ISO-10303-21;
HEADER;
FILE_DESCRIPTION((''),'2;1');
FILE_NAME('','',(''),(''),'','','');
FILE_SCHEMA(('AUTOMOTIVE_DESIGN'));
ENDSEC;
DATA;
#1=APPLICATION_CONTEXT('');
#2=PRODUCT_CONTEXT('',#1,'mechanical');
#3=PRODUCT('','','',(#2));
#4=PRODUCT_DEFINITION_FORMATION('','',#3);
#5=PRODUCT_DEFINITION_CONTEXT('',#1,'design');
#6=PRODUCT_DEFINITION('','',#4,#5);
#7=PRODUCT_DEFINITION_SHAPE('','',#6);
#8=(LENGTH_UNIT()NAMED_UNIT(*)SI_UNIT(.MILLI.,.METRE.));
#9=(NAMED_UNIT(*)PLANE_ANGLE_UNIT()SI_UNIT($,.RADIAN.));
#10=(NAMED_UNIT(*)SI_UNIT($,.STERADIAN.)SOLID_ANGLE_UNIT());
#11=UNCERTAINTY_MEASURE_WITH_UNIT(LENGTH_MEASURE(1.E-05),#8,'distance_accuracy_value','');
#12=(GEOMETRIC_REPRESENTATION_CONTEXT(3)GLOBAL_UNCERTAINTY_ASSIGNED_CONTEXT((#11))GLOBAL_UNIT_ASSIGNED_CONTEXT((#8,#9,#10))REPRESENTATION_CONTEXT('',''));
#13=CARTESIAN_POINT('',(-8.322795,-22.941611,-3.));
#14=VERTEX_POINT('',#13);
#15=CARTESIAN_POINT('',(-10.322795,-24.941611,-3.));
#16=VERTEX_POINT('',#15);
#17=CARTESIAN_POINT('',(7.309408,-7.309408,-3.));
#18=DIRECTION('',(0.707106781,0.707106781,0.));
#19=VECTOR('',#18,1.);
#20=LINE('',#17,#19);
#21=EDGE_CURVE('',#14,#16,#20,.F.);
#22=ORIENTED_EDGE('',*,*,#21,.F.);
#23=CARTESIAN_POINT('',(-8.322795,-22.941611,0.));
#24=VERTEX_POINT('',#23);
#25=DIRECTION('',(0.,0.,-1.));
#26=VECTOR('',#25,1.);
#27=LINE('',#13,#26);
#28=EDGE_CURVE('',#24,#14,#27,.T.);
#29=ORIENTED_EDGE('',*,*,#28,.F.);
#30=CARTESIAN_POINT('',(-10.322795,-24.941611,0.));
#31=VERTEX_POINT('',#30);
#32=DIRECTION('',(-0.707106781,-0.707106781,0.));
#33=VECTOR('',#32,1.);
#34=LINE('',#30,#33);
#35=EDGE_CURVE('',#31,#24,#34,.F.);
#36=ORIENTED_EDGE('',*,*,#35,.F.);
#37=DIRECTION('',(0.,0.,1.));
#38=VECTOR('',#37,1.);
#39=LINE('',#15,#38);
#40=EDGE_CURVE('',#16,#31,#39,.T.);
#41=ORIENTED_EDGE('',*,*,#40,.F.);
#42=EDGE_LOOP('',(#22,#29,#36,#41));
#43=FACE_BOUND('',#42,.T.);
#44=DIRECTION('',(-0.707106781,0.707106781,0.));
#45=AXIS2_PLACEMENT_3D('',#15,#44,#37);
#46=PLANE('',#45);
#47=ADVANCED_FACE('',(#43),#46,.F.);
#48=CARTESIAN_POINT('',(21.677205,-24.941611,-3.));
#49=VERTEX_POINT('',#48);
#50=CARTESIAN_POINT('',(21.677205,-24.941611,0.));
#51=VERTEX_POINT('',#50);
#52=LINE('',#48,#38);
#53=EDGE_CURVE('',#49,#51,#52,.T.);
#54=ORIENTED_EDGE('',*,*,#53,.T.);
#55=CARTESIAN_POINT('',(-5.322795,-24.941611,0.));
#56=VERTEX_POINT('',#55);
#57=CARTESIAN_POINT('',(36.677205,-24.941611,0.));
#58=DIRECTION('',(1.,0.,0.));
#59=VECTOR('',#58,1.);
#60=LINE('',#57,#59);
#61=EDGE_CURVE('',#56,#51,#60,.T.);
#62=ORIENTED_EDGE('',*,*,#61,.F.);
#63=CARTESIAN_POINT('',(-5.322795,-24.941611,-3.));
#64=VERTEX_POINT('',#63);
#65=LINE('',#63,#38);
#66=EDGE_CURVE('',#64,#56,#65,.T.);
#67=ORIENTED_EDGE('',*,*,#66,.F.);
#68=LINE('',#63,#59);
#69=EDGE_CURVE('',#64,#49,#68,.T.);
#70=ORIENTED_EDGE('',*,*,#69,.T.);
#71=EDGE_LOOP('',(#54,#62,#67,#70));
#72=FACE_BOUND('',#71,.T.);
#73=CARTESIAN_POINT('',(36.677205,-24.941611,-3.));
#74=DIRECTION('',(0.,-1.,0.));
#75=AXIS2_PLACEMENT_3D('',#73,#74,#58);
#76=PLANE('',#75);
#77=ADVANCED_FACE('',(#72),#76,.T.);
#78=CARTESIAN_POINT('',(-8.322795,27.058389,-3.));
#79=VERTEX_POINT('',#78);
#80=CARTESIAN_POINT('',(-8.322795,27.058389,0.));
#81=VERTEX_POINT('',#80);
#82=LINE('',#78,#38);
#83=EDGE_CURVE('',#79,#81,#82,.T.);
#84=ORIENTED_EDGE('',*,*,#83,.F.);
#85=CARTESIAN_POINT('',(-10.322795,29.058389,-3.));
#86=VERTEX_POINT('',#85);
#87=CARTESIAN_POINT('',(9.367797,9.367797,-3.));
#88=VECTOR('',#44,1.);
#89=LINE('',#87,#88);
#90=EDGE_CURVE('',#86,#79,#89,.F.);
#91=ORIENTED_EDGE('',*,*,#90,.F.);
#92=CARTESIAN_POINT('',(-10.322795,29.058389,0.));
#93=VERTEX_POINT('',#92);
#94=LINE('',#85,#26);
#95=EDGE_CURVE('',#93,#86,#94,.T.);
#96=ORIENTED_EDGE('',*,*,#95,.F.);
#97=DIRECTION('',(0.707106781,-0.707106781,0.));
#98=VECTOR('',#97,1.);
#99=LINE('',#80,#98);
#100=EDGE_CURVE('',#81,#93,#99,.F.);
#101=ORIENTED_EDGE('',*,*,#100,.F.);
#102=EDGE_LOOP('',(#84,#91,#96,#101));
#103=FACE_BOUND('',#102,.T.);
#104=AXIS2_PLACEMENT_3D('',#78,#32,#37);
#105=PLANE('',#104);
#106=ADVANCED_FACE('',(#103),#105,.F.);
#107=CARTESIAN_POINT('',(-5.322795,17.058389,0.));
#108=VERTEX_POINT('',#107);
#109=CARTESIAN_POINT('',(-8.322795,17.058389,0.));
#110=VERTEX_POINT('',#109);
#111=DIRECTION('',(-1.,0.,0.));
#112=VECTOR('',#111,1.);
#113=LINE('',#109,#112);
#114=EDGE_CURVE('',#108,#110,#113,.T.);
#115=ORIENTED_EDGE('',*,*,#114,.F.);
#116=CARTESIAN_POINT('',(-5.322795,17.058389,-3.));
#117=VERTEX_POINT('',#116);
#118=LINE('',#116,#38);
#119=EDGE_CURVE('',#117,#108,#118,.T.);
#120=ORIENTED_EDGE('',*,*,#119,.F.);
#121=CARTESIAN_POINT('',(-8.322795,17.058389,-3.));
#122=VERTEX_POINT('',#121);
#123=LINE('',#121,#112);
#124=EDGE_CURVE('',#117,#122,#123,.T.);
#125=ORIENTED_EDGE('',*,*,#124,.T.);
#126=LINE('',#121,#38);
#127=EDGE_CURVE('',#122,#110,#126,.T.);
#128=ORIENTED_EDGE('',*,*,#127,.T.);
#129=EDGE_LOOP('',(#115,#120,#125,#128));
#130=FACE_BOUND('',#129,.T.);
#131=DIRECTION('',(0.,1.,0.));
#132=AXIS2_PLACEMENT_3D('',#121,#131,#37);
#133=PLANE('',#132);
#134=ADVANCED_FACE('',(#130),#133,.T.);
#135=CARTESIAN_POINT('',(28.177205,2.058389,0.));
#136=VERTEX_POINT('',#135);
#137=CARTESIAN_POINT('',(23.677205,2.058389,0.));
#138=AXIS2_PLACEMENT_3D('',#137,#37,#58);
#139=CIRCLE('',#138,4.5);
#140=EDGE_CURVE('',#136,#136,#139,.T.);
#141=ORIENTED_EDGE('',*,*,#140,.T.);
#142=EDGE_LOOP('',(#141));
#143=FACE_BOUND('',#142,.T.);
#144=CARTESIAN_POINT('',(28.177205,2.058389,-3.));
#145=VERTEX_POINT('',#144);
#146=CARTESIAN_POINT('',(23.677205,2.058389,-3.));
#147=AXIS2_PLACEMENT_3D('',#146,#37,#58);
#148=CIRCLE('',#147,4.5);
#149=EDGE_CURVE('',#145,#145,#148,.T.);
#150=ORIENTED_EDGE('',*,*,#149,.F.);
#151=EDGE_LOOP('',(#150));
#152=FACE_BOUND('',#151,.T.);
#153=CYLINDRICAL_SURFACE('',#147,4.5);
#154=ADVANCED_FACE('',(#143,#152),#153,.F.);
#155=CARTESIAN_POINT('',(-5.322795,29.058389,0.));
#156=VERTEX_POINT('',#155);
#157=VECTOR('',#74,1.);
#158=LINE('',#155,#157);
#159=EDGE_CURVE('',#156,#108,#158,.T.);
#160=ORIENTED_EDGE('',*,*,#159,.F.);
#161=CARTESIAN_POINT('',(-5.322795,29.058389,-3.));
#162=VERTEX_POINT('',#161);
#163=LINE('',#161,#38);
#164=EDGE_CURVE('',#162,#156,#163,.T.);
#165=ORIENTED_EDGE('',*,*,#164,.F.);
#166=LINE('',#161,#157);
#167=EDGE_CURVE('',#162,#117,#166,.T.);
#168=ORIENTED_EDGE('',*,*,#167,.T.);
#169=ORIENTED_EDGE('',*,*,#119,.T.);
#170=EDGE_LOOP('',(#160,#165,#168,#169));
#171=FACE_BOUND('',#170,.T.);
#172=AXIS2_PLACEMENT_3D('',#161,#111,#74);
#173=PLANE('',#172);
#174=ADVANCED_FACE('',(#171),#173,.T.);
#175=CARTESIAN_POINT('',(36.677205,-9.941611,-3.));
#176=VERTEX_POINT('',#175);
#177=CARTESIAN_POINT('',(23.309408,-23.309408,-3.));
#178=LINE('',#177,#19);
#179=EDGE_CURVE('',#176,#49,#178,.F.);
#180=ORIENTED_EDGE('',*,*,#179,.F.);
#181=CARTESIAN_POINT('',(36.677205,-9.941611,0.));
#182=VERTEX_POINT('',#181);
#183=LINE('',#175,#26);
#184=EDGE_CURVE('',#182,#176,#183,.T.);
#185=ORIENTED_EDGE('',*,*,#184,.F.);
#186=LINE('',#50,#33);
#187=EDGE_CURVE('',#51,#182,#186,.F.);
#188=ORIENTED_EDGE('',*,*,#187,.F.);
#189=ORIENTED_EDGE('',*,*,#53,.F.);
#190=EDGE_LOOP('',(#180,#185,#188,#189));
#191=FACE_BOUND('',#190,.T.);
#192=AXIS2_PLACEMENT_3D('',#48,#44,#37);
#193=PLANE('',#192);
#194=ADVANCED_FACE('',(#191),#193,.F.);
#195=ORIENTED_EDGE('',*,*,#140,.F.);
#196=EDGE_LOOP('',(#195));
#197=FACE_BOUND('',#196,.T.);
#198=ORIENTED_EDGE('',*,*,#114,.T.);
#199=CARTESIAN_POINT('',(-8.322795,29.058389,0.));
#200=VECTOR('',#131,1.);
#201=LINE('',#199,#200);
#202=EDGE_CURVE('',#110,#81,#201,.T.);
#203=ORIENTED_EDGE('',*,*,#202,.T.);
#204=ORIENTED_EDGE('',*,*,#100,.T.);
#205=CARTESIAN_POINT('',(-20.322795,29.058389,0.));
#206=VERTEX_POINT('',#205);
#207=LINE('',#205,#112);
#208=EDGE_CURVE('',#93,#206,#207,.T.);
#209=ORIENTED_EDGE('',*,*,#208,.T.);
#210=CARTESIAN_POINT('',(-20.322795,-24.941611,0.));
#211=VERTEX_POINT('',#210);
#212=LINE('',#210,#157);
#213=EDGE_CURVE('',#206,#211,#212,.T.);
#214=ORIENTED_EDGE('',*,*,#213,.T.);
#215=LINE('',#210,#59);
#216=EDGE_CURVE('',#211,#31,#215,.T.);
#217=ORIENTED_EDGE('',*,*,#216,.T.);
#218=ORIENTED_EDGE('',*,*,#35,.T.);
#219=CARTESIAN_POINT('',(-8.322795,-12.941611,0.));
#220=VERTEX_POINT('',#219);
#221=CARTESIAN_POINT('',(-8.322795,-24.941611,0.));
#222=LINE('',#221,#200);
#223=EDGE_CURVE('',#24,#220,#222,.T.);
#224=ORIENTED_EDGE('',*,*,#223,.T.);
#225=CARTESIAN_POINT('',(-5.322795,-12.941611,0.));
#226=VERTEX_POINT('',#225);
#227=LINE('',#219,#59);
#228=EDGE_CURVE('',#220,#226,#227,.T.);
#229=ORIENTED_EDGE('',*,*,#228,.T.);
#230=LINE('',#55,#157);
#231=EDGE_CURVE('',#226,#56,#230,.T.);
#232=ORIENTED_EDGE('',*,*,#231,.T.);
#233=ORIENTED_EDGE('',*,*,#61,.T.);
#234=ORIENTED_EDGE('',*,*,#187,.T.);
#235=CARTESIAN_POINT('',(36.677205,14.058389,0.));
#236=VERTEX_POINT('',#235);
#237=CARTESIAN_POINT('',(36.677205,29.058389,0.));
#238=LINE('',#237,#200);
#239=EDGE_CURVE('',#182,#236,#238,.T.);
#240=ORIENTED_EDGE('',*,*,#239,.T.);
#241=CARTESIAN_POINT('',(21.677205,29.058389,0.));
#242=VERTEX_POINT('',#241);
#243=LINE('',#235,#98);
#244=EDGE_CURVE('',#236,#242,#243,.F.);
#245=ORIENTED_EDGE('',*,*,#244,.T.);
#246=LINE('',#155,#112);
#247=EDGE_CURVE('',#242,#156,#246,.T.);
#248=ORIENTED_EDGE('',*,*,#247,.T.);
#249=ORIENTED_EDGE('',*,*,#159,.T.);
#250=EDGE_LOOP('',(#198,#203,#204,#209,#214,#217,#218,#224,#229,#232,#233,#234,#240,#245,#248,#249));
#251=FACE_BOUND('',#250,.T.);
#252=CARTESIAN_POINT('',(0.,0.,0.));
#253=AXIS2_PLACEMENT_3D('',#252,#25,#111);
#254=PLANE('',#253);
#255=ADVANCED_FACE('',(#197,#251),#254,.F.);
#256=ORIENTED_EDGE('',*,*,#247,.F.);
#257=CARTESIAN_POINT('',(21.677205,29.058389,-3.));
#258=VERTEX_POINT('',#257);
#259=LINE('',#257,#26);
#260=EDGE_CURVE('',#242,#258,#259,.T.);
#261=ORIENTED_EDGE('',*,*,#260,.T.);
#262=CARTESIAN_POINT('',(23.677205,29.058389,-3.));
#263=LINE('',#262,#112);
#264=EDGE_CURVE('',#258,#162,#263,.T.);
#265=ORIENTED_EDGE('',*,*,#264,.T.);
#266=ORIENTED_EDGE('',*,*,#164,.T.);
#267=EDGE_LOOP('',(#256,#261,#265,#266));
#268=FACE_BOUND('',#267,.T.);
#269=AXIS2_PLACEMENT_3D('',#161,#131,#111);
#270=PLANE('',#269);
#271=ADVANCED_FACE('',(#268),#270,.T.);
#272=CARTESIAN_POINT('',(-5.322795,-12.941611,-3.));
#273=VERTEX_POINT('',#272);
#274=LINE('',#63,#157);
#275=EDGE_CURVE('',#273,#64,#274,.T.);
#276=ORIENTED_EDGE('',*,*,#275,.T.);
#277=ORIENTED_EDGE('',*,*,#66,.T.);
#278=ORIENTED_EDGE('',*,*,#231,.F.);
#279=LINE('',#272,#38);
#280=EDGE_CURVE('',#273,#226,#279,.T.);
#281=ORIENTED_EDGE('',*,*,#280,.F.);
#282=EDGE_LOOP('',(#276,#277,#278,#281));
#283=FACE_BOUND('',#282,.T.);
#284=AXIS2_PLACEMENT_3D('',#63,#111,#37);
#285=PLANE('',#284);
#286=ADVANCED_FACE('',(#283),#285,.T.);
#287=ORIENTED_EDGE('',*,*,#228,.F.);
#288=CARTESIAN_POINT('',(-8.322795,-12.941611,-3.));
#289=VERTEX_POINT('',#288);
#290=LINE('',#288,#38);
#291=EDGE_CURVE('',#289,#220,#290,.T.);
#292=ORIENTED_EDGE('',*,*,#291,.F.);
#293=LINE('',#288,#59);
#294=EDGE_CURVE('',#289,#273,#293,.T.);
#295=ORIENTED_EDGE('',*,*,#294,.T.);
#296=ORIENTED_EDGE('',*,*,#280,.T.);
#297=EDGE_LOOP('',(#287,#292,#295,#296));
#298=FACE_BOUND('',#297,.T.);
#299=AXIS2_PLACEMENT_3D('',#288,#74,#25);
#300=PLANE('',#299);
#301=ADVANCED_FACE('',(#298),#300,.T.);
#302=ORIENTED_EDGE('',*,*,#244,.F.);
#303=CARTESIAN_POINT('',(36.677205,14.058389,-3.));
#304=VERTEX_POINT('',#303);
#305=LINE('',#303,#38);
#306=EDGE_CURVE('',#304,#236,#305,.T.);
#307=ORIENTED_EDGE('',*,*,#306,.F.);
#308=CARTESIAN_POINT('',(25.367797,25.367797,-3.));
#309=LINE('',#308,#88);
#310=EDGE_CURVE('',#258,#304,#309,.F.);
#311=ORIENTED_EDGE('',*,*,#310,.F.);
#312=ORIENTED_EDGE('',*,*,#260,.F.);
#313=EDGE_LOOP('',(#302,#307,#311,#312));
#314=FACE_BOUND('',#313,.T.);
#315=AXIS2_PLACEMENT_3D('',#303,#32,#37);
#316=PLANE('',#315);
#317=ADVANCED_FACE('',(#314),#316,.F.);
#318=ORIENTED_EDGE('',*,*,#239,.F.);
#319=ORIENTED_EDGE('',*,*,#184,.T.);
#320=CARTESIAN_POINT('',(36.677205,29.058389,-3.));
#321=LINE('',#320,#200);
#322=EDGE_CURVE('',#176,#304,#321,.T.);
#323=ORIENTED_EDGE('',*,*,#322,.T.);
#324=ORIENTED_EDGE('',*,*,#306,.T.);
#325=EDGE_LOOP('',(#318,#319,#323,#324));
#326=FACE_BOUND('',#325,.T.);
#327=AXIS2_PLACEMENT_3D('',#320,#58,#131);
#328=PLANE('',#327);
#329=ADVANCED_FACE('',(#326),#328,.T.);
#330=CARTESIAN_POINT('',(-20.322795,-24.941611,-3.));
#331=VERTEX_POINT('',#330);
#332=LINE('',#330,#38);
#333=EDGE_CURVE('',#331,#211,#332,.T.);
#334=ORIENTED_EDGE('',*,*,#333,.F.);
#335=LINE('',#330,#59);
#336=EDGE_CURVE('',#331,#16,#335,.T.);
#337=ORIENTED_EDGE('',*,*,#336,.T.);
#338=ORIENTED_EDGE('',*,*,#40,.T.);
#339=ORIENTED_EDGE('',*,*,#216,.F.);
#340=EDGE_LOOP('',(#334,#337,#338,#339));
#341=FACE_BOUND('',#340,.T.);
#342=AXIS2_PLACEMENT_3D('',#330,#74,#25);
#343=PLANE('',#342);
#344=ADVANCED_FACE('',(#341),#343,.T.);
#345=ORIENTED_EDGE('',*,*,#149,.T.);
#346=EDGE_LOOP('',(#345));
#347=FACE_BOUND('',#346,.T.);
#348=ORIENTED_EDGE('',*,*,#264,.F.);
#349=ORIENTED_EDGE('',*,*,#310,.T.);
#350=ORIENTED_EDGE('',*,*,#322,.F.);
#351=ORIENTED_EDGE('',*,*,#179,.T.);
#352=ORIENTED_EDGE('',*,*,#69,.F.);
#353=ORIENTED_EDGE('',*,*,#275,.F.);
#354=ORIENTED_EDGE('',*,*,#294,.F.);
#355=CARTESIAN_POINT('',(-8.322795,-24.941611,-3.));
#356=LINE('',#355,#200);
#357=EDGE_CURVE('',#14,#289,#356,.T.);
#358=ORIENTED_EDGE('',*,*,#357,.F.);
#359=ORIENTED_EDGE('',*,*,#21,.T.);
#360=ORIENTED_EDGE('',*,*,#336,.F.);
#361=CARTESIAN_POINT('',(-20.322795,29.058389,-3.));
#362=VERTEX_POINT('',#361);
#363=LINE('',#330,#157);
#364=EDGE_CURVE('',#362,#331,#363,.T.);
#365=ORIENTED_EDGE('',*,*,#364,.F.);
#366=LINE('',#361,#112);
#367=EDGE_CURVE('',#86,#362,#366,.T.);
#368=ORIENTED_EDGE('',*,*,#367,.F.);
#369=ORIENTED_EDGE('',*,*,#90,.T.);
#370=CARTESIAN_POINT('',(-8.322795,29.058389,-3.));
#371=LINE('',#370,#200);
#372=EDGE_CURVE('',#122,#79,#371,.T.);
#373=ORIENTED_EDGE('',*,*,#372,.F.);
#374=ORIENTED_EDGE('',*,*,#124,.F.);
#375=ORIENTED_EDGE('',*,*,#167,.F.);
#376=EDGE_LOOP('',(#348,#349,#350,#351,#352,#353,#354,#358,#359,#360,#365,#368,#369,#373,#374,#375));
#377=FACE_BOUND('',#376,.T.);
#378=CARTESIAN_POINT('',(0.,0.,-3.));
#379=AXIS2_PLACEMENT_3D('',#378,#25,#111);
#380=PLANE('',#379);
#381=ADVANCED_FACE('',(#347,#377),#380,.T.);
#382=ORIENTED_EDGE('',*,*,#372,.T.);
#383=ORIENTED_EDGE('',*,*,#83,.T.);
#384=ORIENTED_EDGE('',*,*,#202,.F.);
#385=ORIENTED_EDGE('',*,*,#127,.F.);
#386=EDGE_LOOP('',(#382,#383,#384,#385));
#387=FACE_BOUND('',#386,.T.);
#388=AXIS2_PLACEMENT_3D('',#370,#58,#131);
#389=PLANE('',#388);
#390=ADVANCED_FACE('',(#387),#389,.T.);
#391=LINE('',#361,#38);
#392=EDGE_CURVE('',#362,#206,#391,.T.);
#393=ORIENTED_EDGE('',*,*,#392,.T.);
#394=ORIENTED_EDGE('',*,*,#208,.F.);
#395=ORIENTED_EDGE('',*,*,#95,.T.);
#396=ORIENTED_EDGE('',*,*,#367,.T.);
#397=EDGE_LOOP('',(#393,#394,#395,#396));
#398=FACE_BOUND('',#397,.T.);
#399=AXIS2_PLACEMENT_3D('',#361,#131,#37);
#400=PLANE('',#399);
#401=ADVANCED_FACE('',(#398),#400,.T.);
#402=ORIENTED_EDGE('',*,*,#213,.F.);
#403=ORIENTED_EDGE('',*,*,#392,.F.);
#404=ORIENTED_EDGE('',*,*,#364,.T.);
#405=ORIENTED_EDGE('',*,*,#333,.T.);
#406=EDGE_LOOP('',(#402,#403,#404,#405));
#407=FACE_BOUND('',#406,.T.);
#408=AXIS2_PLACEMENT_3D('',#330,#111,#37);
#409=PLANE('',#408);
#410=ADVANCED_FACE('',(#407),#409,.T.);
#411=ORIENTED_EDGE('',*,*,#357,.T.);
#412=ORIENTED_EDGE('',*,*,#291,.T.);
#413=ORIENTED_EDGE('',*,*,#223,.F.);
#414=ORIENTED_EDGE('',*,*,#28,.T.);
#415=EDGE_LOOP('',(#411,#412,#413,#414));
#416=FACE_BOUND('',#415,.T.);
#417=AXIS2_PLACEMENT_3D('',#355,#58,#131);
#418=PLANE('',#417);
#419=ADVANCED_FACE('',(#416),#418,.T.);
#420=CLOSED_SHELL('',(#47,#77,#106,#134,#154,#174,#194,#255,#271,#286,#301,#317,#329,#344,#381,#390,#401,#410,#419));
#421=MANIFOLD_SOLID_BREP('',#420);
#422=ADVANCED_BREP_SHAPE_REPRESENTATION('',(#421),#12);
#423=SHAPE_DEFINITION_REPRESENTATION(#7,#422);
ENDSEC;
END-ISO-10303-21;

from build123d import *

# Parameters (mm, degrees)
SKETCH1_R          = 4.5
BASE_FLANGE1_DEPTH = 3
CHAMFER2_SIZE      = 15
CHAMFER3_SIZE      = 2


# Sheet-metal steps are written as plain solids
with BuildPart() as part:
    # Sketch1 → Base-Flange1 (new body)
    with BuildSketch(Plane.XY):
        Polygon((-5.322794555, 29.058388501), (23.677205445, 29.058388501), (36.677205445, 29.058388501), (36.677205445, -24.941611499), (17.443611724, -24.941611499), (-5.322794555, -24.941611499), (-5.322794555, -12.941611499), (-8.322794555, -12.941611499), (-8.322794555, -24.941611499), (-20.322794555, -24.941611499), (-20.322794555, 29.058388501), (-8.322794555, 29.058388501), (-8.322794555, 17.058388501), (-5.322794555, 17.058388501), align=None)
        with Locations((23.677205445, 2.058388501)):
            Circle(SKETCH1_R, mode=Mode.SUBTRACT)
    extrude(amount=-BASE_FLANGE1_DEPTH)

    # Chamfer2
    chamfer2_edges = [part.edges().sort_by_distance(p)[0] for p in [
        (36.677205445, 29.058388501, -1.5),
        (36.677205445, -24.941611499, -1.5),
    ]]
    chamfer(chamfer2_edges, length=CHAMFER2_SIZE)

    # Chamfer3
    chamfer3_edges = [part.edges().sort_by_distance(p)[0] for p in [
        (-8.322794555, -24.941611499, -1.5),
        (-8.322794555, 29.058388501, -1.5),
    ]]
    chamfer(chamfer3_edges, length=CHAMFER3_SIZE)


solid = part.part
